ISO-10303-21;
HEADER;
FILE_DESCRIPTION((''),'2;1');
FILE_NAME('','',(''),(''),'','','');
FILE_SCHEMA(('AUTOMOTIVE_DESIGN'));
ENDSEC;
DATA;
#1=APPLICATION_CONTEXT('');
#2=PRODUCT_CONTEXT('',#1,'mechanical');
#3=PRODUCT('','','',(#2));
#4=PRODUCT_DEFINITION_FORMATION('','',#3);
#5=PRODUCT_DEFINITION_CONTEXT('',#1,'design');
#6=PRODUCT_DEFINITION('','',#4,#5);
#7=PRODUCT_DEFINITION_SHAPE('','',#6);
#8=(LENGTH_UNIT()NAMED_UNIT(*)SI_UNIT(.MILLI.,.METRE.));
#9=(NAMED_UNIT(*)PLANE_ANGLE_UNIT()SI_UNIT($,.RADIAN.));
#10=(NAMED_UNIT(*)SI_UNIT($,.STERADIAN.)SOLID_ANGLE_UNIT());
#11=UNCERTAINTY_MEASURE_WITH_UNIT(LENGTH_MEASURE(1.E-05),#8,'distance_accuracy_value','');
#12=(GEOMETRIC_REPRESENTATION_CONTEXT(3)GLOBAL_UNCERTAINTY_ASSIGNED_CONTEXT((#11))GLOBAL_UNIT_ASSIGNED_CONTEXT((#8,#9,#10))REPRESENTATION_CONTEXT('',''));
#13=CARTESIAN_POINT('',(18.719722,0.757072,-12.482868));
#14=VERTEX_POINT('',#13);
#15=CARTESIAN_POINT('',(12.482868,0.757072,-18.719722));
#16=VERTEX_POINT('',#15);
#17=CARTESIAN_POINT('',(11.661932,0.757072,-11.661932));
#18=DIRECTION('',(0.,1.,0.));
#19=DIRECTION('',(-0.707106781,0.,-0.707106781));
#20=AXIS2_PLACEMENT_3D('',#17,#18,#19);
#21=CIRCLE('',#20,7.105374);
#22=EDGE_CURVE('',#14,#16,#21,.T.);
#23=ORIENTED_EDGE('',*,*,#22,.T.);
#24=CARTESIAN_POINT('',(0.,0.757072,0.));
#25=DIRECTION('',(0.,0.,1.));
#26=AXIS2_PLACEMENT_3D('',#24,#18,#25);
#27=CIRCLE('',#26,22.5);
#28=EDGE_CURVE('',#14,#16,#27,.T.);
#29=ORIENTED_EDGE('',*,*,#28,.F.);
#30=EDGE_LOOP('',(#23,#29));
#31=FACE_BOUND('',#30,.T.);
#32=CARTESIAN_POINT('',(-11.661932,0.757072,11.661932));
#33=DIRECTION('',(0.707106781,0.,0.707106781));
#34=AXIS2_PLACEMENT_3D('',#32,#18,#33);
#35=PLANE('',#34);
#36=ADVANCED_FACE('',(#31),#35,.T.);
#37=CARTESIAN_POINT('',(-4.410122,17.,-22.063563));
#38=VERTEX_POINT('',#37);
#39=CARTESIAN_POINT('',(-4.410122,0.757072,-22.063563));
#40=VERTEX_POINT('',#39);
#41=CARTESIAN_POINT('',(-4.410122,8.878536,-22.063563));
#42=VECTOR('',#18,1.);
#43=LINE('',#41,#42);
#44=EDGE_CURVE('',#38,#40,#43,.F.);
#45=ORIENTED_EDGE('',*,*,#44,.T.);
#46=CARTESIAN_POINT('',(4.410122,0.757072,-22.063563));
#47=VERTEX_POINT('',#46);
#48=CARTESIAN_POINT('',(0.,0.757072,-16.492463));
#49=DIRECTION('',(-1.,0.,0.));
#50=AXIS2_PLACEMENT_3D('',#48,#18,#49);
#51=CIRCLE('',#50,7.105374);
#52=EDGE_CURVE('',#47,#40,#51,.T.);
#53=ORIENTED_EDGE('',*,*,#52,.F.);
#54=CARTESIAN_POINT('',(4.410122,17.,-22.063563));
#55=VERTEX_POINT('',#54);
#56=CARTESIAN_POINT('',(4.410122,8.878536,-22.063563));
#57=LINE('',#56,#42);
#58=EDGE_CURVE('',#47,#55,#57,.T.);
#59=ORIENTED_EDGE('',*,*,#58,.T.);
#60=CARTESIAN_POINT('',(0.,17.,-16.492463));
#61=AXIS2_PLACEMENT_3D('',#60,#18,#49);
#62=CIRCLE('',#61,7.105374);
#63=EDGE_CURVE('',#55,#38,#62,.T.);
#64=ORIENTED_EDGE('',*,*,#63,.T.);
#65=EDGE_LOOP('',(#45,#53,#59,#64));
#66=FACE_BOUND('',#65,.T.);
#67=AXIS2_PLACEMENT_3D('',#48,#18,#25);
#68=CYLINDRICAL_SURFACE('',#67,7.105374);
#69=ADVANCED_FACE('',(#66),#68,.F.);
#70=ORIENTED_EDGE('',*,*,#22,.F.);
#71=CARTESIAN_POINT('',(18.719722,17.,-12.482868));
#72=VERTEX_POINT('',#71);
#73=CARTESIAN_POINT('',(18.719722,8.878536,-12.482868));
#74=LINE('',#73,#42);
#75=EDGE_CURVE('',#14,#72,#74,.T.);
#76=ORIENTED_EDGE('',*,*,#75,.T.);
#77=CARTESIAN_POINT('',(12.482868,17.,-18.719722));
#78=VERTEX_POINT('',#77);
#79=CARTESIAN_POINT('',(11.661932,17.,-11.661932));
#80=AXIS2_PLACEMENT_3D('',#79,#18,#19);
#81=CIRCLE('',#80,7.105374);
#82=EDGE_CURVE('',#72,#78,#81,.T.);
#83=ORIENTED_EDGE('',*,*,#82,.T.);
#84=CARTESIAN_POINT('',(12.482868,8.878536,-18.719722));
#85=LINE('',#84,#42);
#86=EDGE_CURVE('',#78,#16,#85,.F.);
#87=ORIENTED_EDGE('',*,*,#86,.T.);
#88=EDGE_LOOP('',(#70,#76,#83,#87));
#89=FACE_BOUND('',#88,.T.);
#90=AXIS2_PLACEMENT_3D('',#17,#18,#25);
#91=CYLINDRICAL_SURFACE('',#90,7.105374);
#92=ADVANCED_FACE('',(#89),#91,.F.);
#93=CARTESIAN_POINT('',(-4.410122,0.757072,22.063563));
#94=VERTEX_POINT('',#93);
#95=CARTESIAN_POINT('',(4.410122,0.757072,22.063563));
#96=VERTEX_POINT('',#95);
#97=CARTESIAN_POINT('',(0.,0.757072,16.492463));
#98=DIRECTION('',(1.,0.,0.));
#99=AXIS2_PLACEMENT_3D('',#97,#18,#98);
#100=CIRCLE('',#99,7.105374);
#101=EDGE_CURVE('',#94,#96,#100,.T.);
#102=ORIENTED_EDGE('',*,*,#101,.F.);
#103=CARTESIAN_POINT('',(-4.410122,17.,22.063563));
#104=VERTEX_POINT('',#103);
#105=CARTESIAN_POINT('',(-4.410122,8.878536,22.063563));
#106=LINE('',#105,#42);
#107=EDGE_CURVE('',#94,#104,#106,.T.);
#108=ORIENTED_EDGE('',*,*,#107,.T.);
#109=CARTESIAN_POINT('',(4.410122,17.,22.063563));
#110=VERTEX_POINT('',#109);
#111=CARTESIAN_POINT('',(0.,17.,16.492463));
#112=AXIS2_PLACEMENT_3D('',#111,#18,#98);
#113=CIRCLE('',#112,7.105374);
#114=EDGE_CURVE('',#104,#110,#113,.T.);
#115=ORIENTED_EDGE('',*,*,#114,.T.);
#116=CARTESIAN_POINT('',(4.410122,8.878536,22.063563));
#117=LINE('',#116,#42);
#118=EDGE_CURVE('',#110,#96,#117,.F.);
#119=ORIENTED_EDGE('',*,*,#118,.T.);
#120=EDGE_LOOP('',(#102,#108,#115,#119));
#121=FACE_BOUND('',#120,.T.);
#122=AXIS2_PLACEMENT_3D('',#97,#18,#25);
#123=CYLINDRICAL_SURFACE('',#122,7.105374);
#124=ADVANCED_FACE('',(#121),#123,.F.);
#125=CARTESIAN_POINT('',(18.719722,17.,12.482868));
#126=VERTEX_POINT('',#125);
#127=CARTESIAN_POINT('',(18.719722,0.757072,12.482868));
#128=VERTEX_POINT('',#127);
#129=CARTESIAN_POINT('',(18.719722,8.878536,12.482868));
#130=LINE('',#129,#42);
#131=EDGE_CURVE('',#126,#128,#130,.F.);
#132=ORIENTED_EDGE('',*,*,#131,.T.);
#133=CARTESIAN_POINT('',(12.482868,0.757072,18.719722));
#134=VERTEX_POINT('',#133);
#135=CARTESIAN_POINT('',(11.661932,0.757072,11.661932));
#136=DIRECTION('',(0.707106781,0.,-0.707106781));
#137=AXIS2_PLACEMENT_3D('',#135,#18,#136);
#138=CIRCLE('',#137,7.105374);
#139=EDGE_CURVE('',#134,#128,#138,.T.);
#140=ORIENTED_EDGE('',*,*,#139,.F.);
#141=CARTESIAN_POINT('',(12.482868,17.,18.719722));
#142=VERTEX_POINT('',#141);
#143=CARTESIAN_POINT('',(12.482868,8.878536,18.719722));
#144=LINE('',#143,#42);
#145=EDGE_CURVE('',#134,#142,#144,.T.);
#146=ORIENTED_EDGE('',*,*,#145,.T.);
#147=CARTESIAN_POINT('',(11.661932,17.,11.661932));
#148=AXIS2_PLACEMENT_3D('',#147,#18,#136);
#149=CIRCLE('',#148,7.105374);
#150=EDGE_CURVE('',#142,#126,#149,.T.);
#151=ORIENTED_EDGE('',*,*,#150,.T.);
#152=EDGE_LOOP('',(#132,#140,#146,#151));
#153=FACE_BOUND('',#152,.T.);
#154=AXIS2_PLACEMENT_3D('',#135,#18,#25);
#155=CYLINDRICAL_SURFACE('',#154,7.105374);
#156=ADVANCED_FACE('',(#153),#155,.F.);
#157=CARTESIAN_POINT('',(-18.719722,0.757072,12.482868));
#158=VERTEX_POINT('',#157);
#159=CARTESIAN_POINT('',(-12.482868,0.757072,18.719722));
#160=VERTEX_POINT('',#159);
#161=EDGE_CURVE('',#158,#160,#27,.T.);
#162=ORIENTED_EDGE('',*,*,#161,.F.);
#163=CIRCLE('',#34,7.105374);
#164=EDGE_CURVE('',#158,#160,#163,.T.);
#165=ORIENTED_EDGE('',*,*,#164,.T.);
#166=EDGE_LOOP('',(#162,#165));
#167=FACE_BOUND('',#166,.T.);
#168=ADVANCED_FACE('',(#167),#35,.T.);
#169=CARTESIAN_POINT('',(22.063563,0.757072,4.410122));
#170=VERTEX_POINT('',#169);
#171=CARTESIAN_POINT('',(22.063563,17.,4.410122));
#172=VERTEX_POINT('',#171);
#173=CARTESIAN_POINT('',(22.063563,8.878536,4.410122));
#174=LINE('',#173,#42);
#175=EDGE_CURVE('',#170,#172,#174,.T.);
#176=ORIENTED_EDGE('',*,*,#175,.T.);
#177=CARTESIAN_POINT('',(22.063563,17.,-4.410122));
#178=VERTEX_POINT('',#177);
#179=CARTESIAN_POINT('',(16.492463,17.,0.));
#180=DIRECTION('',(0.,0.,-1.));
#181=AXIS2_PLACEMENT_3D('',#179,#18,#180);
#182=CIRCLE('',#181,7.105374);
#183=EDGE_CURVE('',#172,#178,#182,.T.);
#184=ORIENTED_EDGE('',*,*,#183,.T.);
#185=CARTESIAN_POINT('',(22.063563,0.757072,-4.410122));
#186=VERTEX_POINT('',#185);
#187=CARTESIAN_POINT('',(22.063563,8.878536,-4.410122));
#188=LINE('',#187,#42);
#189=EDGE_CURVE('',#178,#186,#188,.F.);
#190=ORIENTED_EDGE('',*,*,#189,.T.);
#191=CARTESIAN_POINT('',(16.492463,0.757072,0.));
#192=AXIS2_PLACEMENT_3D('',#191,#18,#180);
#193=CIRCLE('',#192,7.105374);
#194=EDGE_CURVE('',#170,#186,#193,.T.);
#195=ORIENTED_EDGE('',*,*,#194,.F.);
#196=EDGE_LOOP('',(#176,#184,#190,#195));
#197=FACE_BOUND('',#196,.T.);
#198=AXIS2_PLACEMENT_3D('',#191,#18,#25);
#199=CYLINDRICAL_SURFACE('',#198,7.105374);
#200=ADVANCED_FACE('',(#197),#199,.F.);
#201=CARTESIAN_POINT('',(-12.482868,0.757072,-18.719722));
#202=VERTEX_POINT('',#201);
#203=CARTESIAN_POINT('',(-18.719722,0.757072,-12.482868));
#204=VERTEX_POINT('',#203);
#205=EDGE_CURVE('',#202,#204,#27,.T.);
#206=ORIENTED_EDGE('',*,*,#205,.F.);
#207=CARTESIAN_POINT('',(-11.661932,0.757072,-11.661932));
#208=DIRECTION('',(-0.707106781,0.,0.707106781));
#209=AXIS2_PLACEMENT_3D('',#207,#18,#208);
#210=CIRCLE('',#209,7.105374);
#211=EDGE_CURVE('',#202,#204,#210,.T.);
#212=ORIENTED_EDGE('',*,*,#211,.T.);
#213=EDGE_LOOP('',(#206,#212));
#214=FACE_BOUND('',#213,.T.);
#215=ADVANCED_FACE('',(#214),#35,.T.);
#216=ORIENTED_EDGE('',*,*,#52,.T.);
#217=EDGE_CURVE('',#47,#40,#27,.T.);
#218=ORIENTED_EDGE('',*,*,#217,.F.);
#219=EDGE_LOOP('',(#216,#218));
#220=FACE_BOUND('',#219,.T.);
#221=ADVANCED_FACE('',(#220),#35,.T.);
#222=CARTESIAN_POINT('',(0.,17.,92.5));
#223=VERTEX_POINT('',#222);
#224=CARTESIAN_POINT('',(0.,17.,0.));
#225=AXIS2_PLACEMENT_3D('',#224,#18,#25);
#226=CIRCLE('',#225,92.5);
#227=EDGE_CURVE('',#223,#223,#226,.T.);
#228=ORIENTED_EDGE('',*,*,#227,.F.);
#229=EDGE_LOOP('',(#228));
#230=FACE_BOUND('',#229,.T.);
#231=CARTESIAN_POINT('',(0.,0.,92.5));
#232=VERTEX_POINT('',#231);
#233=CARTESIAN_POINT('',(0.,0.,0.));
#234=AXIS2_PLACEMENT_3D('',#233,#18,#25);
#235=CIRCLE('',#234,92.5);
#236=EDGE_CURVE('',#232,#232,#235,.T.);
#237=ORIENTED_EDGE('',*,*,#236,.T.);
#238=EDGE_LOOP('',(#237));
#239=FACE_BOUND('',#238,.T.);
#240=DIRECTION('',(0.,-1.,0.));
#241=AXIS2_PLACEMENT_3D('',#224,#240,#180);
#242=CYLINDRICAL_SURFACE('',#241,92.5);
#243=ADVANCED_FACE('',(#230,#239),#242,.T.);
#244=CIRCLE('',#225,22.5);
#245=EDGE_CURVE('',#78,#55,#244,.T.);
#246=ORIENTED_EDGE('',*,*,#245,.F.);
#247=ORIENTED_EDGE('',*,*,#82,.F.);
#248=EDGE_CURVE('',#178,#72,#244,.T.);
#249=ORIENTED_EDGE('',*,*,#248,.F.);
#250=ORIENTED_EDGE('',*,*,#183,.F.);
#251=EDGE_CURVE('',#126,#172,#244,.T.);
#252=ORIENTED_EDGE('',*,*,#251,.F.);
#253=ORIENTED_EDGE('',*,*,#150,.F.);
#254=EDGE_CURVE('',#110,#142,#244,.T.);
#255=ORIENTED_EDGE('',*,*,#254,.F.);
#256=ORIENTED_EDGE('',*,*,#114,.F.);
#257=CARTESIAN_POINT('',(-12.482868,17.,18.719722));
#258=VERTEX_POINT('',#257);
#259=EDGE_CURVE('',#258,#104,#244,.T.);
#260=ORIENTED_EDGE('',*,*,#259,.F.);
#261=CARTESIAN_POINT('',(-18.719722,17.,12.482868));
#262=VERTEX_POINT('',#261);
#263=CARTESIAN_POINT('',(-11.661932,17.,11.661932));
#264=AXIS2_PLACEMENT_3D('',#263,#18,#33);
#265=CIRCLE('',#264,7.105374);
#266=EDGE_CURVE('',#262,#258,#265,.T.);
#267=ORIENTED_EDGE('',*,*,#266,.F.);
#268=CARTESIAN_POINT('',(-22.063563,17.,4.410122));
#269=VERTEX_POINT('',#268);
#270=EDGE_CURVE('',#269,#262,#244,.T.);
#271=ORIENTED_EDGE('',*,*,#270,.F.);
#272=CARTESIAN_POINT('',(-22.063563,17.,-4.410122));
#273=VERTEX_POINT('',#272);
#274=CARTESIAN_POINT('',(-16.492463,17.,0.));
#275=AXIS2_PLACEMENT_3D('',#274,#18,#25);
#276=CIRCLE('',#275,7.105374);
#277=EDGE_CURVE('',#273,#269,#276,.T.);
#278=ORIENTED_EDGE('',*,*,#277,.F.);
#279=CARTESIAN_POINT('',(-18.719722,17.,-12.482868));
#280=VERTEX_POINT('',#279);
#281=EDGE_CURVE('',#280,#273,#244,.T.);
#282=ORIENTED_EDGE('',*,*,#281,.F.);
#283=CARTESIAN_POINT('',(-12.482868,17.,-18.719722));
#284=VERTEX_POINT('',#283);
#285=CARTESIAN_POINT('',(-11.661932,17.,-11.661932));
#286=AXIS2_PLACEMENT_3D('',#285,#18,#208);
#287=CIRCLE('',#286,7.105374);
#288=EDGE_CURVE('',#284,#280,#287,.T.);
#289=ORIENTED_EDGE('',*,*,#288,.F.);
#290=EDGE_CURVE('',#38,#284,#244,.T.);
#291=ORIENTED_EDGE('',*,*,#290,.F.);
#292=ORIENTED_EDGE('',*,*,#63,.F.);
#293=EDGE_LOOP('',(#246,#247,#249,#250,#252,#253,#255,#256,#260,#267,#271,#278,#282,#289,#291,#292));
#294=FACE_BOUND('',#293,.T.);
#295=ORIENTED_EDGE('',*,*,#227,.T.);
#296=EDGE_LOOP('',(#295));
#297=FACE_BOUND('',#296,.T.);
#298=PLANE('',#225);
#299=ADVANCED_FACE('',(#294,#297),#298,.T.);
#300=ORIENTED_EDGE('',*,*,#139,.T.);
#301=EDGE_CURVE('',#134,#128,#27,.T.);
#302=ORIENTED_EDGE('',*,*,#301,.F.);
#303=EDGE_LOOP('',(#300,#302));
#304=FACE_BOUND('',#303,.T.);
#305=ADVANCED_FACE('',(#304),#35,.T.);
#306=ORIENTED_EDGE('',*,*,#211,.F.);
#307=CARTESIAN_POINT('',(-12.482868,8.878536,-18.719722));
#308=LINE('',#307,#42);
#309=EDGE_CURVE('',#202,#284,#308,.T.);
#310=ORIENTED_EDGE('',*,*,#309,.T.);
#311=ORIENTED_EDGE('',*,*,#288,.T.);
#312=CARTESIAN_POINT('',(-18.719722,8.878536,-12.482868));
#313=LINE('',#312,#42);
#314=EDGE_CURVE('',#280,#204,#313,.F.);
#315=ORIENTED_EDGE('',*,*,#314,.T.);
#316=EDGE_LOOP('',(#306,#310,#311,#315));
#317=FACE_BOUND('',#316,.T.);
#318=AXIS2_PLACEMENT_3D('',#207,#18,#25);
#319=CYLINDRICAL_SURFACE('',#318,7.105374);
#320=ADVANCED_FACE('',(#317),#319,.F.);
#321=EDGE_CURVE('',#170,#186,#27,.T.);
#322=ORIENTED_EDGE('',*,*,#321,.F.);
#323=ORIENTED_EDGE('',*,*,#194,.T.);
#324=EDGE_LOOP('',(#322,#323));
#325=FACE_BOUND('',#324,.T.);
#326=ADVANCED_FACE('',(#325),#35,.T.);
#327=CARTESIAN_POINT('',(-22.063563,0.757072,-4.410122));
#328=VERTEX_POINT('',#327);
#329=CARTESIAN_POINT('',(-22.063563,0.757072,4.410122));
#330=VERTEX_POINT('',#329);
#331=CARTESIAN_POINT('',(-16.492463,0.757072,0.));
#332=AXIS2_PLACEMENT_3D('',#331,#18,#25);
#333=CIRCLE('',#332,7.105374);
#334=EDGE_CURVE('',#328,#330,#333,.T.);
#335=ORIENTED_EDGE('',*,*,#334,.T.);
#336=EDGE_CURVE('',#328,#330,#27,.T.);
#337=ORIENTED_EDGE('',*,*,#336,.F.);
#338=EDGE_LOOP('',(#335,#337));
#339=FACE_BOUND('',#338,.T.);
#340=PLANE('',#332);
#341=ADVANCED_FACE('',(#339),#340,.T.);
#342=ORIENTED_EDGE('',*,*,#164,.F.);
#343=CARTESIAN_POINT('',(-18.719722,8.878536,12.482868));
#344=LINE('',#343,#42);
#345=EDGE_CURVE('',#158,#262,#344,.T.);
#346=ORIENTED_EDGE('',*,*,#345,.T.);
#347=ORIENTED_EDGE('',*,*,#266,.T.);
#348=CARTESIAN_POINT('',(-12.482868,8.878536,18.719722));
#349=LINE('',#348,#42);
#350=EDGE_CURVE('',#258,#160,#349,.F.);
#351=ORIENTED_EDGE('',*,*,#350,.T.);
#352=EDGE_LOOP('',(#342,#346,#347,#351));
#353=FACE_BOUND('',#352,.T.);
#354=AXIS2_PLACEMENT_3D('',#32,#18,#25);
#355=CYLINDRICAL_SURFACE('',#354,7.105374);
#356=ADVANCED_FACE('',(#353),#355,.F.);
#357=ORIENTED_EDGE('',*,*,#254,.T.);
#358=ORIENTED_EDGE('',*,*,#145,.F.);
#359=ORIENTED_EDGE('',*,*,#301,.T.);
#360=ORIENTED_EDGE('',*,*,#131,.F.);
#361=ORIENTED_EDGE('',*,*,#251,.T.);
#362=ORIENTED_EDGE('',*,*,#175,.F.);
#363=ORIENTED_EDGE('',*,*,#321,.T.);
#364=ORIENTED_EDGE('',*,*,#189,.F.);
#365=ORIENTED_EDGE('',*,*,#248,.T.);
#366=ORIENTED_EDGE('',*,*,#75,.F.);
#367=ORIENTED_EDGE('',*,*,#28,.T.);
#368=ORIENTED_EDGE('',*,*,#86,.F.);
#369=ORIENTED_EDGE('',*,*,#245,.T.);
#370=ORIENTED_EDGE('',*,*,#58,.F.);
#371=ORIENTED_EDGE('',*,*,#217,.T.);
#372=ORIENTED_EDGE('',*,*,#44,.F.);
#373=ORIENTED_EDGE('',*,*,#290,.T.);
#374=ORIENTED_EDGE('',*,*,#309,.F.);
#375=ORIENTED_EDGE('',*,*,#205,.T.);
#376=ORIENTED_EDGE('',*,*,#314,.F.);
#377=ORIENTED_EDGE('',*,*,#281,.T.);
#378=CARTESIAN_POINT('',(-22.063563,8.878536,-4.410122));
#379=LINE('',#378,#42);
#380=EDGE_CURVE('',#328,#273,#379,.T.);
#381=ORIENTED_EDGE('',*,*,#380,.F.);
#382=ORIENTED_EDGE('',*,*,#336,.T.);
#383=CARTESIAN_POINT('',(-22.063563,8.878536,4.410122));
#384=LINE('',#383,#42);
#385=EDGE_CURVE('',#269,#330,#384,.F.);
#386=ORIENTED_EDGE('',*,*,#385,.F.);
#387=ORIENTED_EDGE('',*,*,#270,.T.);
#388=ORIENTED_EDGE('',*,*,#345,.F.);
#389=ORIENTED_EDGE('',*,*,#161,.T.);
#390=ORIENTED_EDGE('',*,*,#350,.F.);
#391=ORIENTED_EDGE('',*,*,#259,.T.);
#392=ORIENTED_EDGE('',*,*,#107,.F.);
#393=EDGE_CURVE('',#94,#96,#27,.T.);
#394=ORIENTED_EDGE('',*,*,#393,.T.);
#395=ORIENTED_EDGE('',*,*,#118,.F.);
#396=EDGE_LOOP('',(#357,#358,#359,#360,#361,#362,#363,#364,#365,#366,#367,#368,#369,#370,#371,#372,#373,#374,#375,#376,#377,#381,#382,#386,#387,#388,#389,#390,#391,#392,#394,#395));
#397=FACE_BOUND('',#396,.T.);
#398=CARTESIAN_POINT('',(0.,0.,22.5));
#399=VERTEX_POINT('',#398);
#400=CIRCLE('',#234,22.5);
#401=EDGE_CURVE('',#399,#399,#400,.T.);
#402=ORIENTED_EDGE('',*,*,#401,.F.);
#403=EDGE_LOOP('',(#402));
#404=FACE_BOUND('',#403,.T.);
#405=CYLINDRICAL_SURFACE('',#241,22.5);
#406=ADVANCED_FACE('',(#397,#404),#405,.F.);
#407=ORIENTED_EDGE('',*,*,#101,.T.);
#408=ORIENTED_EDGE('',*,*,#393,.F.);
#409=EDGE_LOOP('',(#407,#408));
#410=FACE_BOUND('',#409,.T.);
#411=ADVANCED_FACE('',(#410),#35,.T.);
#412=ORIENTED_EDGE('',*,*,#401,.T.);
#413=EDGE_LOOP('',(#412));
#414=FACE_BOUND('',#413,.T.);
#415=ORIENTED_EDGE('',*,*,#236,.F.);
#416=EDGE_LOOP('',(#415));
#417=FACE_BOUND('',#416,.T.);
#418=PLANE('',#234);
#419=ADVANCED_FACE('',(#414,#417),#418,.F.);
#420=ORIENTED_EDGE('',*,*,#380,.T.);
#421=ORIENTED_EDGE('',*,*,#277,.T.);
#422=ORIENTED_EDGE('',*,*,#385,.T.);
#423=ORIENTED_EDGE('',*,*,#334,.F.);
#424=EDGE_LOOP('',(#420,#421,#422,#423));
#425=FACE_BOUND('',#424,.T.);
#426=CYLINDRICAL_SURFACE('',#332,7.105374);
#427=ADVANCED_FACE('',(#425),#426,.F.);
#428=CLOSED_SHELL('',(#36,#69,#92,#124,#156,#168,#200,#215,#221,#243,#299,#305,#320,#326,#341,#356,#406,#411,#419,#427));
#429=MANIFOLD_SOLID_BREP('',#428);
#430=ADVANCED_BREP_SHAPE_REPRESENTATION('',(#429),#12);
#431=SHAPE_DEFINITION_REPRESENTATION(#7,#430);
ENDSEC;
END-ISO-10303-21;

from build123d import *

# Parameters (mm, degrees)
SKETCH1_R           = 92.5
BOSS_EXTRUDE1_DEPTH = 17
SKETCH2_R           = 22.5
CUT_EXTRUDE1_DEPTH  = 132.914745196
SKETCH3_R           = 7.10537367
CUT_EXTRUDE2_DEPTH  = 16.242927573
CIRPATTERN1_COUNT   = 8


with BuildPart() as part:
    # Sketch1 → Boss-Extrude1 (new body)
    with BuildSketch(Plane(origin=(0, 0, 0), x_dir=(1, 0, 0), z_dir=(0, 1, 0))):
        Circle(SKETCH1_R)
    extrude(amount=BOSS_EXTRUDE1_DEPTH)

    # Sketch2 → Cut-Extrude1 (cut, through all)
    with BuildSketch(Plane(origin=(0, 0, 0), x_dir=(1, 0, 0), z_dir=(0, 1, 0))):
        Circle(SKETCH2_R)
    extrude(amount=CUT_EXTRUDE1_DEPTH, mode=Mode.SUBTRACT)

    # Sketch3 → Cut-Extrude2 (cut)
    with BuildSketch(Plane(origin=(0, 17, 0), x_dir=(1, 0, 0), z_dir=(0, 1, 0))):
        with Locations((-16.492462807, 0)):
            Circle(SKETCH3_R)
    cut_extrude2 = extrude(amount=-CUT_EXTRUDE2_DEPTH, mode=Mode.SUBTRACT)

    # CirPattern1: Cut-Extrude2 ×8 about axis
    cirpattern1_axis = Axis((0, 0, 0), (0, 1, 0))
    for i in range(1, CIRPATTERN1_COUNT):
        add(cut_extrude2.rotate(cirpattern1_axis, i * 360 / CIRPATTERN1_COUNT), mode=Mode.SUBTRACT)


solid = part.part
